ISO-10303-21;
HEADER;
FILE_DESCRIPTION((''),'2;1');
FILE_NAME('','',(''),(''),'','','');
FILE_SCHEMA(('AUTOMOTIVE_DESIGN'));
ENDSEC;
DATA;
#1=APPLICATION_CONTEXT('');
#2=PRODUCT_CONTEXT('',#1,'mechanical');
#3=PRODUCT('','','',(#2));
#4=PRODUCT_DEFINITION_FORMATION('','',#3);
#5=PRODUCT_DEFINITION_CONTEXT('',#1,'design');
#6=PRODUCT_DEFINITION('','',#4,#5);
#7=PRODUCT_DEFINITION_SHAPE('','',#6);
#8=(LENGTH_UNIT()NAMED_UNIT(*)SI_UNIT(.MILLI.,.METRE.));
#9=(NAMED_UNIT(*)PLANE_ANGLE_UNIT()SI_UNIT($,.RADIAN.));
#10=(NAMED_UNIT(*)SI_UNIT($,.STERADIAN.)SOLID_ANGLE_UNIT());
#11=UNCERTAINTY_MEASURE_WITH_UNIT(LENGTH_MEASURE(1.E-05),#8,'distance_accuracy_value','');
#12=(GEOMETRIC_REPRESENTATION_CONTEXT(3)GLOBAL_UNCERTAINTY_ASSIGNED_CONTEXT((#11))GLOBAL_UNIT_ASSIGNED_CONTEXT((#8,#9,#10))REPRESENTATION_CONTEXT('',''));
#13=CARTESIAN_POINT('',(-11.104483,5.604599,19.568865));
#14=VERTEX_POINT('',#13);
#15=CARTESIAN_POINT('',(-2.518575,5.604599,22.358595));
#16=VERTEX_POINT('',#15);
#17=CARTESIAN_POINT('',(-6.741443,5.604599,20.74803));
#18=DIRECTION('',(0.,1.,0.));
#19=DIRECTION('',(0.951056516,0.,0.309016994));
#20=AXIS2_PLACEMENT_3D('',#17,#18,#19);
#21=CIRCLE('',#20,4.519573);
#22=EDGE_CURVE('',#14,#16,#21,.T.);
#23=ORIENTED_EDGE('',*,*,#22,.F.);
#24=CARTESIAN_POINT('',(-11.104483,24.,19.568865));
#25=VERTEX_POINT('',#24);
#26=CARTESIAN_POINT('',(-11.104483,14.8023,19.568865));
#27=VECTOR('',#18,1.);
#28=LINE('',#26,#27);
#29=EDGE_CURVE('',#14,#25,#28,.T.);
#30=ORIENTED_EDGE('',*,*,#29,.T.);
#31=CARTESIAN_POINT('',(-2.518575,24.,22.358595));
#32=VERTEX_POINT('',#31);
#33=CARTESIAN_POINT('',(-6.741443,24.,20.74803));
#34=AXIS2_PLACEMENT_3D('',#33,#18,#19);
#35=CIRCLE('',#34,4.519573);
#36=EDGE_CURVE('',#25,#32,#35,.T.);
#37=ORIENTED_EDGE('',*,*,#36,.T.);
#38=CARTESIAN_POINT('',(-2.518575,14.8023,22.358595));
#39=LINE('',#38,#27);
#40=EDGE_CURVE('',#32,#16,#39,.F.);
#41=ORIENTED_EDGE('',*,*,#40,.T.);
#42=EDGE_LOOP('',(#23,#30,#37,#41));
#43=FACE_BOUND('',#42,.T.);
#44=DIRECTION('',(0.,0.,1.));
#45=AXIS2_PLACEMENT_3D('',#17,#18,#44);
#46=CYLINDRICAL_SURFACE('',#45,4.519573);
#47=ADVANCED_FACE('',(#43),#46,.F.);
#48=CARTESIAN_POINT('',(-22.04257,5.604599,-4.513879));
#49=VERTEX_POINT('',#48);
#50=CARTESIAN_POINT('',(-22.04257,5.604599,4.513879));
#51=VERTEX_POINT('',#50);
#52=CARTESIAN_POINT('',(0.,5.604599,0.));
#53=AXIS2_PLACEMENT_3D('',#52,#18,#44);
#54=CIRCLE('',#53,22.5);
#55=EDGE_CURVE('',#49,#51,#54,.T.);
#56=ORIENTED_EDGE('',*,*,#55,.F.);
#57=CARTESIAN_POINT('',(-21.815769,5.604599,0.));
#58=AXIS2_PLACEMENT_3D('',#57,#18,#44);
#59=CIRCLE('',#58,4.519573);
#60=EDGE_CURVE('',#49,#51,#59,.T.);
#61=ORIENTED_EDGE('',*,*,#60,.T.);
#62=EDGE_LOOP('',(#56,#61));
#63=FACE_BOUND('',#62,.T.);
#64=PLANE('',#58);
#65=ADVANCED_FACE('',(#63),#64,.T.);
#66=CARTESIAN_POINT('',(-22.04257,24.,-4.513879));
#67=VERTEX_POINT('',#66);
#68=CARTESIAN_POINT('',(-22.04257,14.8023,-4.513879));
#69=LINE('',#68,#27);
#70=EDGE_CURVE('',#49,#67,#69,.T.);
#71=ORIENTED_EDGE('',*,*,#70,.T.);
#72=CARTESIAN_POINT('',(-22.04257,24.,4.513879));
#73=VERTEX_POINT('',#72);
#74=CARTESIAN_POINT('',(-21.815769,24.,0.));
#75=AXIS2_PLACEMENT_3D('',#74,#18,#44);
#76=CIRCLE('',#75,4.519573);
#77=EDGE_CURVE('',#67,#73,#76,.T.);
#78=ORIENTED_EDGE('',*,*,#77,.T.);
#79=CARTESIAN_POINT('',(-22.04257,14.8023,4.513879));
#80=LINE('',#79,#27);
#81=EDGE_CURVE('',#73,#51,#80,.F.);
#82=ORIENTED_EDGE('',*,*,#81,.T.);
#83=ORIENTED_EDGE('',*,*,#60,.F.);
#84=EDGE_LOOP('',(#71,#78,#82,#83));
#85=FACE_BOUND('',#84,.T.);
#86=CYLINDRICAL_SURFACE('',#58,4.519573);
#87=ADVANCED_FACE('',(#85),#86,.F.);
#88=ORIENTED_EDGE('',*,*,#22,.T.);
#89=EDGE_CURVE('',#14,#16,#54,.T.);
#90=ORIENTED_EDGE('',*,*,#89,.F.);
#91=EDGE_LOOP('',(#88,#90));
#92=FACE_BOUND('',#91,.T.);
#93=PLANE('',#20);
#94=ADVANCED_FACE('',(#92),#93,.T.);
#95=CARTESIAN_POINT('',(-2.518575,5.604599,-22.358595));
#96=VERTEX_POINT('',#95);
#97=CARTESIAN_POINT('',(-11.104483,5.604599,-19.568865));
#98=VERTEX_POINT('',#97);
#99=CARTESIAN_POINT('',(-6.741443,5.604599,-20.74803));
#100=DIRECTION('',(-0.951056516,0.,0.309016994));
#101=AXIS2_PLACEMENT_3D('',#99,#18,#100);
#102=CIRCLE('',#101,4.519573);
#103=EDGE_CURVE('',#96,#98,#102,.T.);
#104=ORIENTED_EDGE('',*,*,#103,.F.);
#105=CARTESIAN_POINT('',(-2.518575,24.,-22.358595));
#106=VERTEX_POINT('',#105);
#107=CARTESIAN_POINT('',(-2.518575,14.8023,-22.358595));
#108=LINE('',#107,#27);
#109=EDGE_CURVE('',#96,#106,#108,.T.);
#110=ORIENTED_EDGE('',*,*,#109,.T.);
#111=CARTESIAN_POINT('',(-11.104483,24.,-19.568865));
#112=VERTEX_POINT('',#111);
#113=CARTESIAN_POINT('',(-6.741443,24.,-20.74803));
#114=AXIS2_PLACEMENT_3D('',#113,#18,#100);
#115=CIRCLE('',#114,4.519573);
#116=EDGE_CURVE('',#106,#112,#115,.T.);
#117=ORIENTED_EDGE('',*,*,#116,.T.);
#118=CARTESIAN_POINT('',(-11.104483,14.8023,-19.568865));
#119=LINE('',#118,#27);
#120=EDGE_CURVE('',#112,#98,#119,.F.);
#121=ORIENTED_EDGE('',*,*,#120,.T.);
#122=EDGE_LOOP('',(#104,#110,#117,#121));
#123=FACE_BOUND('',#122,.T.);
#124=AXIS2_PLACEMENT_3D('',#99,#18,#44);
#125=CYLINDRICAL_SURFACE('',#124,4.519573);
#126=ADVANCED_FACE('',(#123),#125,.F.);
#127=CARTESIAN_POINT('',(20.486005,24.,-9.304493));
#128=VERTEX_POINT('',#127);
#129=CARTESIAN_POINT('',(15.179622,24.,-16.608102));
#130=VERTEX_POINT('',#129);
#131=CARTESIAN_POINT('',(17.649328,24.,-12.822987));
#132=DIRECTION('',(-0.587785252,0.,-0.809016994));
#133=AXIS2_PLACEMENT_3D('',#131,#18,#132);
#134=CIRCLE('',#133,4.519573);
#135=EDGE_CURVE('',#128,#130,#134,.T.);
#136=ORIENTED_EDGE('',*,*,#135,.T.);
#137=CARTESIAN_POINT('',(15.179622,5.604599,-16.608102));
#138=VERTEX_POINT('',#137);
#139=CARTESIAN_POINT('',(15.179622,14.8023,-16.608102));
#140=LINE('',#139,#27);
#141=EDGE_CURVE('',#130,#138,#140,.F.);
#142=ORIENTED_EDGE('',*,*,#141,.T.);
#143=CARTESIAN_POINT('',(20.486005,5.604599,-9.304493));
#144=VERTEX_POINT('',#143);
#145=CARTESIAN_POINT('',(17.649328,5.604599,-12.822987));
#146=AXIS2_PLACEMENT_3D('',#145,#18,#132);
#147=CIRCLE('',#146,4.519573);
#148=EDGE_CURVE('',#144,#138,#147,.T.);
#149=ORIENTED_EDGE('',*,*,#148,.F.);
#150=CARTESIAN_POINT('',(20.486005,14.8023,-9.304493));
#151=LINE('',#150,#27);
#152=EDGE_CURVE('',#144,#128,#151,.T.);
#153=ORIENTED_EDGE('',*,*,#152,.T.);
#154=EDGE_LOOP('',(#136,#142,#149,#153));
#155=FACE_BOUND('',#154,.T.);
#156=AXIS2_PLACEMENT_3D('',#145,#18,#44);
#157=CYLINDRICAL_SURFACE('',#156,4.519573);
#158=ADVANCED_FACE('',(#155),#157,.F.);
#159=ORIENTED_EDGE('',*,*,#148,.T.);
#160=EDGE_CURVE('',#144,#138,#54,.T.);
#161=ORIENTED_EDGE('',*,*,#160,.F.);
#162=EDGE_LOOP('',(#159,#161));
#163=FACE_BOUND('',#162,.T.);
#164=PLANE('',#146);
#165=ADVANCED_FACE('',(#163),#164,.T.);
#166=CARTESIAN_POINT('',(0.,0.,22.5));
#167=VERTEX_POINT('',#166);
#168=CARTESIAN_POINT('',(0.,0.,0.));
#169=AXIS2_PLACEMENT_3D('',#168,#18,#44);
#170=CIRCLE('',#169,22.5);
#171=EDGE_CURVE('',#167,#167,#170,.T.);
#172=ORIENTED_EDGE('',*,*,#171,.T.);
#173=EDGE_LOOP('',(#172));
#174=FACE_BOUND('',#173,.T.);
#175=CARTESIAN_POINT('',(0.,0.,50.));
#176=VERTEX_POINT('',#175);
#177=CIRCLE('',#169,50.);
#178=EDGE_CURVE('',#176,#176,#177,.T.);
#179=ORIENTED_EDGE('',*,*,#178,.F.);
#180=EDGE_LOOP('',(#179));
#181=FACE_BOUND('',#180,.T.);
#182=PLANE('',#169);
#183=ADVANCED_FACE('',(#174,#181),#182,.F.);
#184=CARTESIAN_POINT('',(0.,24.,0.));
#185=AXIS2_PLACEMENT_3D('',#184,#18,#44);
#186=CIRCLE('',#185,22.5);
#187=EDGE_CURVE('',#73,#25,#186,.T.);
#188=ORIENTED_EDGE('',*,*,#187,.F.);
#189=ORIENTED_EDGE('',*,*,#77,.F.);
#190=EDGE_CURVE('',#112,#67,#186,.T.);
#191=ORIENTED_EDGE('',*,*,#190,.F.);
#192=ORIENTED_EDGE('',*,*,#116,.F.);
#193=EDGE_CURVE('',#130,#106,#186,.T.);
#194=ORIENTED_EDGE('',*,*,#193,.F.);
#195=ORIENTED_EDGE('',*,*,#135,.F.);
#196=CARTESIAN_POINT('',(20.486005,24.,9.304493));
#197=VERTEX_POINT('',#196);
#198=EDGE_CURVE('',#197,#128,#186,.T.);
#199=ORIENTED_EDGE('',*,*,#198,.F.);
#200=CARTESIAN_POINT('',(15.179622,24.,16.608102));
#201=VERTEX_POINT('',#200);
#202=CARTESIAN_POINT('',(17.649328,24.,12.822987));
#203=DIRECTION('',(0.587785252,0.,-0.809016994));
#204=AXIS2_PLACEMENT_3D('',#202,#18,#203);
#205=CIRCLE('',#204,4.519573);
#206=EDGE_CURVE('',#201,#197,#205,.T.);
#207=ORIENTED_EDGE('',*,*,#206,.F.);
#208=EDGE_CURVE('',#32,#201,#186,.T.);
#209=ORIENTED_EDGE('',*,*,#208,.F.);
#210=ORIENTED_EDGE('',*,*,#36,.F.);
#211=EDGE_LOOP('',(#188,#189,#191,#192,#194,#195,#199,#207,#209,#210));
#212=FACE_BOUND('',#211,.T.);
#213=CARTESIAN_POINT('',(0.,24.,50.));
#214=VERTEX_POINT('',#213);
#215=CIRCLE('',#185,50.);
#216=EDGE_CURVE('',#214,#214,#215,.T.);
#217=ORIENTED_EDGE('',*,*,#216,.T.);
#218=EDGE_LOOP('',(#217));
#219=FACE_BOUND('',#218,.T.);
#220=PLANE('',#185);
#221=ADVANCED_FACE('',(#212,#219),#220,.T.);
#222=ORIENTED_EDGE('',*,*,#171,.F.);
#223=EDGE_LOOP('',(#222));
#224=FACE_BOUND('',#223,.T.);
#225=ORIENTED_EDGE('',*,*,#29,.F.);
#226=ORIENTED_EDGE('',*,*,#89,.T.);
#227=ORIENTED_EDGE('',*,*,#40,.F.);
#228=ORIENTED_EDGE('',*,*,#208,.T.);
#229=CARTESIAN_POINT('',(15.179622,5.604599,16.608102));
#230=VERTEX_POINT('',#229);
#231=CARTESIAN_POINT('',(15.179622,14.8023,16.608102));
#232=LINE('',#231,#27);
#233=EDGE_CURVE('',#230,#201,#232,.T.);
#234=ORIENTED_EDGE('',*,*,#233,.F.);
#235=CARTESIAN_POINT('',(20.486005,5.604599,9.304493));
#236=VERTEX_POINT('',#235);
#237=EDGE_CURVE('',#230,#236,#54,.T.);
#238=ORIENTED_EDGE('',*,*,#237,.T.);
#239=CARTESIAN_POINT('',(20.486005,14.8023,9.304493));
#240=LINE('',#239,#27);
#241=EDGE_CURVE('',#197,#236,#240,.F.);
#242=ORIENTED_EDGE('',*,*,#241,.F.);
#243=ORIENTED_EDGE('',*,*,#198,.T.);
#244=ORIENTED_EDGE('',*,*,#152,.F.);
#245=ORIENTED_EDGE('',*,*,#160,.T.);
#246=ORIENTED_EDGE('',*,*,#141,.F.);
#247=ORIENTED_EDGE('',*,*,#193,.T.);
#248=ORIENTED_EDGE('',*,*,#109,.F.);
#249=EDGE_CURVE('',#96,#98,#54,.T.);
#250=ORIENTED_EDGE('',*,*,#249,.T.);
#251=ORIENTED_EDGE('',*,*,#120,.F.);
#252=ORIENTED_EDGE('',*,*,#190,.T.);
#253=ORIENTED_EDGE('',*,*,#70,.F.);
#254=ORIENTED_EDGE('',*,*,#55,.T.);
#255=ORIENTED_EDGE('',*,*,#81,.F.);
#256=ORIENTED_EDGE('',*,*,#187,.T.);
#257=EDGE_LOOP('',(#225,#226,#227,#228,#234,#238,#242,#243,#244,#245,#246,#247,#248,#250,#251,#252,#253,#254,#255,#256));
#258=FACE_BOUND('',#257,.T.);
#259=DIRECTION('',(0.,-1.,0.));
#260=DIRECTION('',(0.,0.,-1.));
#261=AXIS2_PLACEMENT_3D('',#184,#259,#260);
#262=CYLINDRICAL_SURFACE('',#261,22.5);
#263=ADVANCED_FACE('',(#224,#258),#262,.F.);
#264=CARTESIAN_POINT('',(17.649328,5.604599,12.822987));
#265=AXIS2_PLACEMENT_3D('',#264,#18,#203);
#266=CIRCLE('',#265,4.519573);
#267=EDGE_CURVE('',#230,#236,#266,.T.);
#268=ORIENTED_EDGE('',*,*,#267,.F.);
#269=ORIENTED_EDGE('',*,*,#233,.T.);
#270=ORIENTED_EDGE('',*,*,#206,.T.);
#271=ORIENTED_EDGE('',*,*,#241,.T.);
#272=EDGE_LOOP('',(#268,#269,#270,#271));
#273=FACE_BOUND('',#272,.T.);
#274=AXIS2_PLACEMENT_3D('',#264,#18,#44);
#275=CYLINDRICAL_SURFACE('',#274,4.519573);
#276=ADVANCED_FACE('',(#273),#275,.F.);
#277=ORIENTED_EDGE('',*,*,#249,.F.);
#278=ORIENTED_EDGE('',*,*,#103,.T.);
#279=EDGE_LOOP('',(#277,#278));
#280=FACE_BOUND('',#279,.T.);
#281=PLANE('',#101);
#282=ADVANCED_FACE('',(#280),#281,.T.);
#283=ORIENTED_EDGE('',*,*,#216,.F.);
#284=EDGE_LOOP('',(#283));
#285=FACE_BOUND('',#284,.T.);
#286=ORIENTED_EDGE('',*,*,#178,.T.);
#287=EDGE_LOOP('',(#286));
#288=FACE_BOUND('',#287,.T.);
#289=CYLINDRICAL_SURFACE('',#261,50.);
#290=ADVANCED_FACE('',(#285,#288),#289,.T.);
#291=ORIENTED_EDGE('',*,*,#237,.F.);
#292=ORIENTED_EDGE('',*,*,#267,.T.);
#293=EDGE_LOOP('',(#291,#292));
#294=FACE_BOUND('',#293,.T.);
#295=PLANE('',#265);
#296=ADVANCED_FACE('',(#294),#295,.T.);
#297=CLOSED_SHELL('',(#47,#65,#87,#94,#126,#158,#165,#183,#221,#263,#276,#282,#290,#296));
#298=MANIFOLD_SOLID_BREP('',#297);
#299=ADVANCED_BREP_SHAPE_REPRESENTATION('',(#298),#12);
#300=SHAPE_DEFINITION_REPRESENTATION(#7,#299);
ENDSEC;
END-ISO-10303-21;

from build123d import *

# Parameters (mm, degrees)
SKETCH1_R           = 50
BOSS_EXTRUDE1_DEPTH = 24
SKETCH2_R           = 22.5
CUT_EXTRUDE1_DEPTH  = 75.67261881
SKETCH3_R           = 4.519573081
CUT_EXTRUDE2_DEPTH  = 18.395400767
CIRPATTERN1_COUNT   = 5


with BuildPart() as part:
    # Sketch1 → Boss-Extrude1 (new body)
    with BuildSketch(Plane(origin=(0, 0, 0), x_dir=(1, 0, 0), z_dir=(0, 1, 0))):
        Circle(SKETCH1_R)
    extrude(amount=BOSS_EXTRUDE1_DEPTH)

    # Sketch2 → Cut-Extrude1 (cut, through all)
    with BuildSketch(Plane(origin=(0, 0, 0), x_dir=(1, 0, 0), z_dir=(0, 1, 0))):
        Circle(SKETCH2_R)
    extrude(amount=CUT_EXTRUDE1_DEPTH, mode=Mode.SUBTRACT)

    # Sketch3 → Cut-Extrude2 (cut)
    with BuildSketch(Plane(origin=(0, 24, 0), x_dir=(1, 0, 0), z_dir=(0, 1, 0))):
        with Locations((-21.815769352, 0)):
            Circle(SKETCH3_R)
    cut_extrude2 = extrude(amount=-CUT_EXTRUDE2_DEPTH, mode=Mode.SUBTRACT)

    # CirPattern1: Cut-Extrude2 ×5 about axis
    cirpattern1_axis = Axis((0, 0, 0), (0, 1, 0))
    for i in range(1, CIRPATTERN1_COUNT):
        add(cut_extrude2.rotate(cirpattern1_axis, i * 360 / CIRPATTERN1_COUNT), mode=Mode.SUBTRACT)


solid = part.part
